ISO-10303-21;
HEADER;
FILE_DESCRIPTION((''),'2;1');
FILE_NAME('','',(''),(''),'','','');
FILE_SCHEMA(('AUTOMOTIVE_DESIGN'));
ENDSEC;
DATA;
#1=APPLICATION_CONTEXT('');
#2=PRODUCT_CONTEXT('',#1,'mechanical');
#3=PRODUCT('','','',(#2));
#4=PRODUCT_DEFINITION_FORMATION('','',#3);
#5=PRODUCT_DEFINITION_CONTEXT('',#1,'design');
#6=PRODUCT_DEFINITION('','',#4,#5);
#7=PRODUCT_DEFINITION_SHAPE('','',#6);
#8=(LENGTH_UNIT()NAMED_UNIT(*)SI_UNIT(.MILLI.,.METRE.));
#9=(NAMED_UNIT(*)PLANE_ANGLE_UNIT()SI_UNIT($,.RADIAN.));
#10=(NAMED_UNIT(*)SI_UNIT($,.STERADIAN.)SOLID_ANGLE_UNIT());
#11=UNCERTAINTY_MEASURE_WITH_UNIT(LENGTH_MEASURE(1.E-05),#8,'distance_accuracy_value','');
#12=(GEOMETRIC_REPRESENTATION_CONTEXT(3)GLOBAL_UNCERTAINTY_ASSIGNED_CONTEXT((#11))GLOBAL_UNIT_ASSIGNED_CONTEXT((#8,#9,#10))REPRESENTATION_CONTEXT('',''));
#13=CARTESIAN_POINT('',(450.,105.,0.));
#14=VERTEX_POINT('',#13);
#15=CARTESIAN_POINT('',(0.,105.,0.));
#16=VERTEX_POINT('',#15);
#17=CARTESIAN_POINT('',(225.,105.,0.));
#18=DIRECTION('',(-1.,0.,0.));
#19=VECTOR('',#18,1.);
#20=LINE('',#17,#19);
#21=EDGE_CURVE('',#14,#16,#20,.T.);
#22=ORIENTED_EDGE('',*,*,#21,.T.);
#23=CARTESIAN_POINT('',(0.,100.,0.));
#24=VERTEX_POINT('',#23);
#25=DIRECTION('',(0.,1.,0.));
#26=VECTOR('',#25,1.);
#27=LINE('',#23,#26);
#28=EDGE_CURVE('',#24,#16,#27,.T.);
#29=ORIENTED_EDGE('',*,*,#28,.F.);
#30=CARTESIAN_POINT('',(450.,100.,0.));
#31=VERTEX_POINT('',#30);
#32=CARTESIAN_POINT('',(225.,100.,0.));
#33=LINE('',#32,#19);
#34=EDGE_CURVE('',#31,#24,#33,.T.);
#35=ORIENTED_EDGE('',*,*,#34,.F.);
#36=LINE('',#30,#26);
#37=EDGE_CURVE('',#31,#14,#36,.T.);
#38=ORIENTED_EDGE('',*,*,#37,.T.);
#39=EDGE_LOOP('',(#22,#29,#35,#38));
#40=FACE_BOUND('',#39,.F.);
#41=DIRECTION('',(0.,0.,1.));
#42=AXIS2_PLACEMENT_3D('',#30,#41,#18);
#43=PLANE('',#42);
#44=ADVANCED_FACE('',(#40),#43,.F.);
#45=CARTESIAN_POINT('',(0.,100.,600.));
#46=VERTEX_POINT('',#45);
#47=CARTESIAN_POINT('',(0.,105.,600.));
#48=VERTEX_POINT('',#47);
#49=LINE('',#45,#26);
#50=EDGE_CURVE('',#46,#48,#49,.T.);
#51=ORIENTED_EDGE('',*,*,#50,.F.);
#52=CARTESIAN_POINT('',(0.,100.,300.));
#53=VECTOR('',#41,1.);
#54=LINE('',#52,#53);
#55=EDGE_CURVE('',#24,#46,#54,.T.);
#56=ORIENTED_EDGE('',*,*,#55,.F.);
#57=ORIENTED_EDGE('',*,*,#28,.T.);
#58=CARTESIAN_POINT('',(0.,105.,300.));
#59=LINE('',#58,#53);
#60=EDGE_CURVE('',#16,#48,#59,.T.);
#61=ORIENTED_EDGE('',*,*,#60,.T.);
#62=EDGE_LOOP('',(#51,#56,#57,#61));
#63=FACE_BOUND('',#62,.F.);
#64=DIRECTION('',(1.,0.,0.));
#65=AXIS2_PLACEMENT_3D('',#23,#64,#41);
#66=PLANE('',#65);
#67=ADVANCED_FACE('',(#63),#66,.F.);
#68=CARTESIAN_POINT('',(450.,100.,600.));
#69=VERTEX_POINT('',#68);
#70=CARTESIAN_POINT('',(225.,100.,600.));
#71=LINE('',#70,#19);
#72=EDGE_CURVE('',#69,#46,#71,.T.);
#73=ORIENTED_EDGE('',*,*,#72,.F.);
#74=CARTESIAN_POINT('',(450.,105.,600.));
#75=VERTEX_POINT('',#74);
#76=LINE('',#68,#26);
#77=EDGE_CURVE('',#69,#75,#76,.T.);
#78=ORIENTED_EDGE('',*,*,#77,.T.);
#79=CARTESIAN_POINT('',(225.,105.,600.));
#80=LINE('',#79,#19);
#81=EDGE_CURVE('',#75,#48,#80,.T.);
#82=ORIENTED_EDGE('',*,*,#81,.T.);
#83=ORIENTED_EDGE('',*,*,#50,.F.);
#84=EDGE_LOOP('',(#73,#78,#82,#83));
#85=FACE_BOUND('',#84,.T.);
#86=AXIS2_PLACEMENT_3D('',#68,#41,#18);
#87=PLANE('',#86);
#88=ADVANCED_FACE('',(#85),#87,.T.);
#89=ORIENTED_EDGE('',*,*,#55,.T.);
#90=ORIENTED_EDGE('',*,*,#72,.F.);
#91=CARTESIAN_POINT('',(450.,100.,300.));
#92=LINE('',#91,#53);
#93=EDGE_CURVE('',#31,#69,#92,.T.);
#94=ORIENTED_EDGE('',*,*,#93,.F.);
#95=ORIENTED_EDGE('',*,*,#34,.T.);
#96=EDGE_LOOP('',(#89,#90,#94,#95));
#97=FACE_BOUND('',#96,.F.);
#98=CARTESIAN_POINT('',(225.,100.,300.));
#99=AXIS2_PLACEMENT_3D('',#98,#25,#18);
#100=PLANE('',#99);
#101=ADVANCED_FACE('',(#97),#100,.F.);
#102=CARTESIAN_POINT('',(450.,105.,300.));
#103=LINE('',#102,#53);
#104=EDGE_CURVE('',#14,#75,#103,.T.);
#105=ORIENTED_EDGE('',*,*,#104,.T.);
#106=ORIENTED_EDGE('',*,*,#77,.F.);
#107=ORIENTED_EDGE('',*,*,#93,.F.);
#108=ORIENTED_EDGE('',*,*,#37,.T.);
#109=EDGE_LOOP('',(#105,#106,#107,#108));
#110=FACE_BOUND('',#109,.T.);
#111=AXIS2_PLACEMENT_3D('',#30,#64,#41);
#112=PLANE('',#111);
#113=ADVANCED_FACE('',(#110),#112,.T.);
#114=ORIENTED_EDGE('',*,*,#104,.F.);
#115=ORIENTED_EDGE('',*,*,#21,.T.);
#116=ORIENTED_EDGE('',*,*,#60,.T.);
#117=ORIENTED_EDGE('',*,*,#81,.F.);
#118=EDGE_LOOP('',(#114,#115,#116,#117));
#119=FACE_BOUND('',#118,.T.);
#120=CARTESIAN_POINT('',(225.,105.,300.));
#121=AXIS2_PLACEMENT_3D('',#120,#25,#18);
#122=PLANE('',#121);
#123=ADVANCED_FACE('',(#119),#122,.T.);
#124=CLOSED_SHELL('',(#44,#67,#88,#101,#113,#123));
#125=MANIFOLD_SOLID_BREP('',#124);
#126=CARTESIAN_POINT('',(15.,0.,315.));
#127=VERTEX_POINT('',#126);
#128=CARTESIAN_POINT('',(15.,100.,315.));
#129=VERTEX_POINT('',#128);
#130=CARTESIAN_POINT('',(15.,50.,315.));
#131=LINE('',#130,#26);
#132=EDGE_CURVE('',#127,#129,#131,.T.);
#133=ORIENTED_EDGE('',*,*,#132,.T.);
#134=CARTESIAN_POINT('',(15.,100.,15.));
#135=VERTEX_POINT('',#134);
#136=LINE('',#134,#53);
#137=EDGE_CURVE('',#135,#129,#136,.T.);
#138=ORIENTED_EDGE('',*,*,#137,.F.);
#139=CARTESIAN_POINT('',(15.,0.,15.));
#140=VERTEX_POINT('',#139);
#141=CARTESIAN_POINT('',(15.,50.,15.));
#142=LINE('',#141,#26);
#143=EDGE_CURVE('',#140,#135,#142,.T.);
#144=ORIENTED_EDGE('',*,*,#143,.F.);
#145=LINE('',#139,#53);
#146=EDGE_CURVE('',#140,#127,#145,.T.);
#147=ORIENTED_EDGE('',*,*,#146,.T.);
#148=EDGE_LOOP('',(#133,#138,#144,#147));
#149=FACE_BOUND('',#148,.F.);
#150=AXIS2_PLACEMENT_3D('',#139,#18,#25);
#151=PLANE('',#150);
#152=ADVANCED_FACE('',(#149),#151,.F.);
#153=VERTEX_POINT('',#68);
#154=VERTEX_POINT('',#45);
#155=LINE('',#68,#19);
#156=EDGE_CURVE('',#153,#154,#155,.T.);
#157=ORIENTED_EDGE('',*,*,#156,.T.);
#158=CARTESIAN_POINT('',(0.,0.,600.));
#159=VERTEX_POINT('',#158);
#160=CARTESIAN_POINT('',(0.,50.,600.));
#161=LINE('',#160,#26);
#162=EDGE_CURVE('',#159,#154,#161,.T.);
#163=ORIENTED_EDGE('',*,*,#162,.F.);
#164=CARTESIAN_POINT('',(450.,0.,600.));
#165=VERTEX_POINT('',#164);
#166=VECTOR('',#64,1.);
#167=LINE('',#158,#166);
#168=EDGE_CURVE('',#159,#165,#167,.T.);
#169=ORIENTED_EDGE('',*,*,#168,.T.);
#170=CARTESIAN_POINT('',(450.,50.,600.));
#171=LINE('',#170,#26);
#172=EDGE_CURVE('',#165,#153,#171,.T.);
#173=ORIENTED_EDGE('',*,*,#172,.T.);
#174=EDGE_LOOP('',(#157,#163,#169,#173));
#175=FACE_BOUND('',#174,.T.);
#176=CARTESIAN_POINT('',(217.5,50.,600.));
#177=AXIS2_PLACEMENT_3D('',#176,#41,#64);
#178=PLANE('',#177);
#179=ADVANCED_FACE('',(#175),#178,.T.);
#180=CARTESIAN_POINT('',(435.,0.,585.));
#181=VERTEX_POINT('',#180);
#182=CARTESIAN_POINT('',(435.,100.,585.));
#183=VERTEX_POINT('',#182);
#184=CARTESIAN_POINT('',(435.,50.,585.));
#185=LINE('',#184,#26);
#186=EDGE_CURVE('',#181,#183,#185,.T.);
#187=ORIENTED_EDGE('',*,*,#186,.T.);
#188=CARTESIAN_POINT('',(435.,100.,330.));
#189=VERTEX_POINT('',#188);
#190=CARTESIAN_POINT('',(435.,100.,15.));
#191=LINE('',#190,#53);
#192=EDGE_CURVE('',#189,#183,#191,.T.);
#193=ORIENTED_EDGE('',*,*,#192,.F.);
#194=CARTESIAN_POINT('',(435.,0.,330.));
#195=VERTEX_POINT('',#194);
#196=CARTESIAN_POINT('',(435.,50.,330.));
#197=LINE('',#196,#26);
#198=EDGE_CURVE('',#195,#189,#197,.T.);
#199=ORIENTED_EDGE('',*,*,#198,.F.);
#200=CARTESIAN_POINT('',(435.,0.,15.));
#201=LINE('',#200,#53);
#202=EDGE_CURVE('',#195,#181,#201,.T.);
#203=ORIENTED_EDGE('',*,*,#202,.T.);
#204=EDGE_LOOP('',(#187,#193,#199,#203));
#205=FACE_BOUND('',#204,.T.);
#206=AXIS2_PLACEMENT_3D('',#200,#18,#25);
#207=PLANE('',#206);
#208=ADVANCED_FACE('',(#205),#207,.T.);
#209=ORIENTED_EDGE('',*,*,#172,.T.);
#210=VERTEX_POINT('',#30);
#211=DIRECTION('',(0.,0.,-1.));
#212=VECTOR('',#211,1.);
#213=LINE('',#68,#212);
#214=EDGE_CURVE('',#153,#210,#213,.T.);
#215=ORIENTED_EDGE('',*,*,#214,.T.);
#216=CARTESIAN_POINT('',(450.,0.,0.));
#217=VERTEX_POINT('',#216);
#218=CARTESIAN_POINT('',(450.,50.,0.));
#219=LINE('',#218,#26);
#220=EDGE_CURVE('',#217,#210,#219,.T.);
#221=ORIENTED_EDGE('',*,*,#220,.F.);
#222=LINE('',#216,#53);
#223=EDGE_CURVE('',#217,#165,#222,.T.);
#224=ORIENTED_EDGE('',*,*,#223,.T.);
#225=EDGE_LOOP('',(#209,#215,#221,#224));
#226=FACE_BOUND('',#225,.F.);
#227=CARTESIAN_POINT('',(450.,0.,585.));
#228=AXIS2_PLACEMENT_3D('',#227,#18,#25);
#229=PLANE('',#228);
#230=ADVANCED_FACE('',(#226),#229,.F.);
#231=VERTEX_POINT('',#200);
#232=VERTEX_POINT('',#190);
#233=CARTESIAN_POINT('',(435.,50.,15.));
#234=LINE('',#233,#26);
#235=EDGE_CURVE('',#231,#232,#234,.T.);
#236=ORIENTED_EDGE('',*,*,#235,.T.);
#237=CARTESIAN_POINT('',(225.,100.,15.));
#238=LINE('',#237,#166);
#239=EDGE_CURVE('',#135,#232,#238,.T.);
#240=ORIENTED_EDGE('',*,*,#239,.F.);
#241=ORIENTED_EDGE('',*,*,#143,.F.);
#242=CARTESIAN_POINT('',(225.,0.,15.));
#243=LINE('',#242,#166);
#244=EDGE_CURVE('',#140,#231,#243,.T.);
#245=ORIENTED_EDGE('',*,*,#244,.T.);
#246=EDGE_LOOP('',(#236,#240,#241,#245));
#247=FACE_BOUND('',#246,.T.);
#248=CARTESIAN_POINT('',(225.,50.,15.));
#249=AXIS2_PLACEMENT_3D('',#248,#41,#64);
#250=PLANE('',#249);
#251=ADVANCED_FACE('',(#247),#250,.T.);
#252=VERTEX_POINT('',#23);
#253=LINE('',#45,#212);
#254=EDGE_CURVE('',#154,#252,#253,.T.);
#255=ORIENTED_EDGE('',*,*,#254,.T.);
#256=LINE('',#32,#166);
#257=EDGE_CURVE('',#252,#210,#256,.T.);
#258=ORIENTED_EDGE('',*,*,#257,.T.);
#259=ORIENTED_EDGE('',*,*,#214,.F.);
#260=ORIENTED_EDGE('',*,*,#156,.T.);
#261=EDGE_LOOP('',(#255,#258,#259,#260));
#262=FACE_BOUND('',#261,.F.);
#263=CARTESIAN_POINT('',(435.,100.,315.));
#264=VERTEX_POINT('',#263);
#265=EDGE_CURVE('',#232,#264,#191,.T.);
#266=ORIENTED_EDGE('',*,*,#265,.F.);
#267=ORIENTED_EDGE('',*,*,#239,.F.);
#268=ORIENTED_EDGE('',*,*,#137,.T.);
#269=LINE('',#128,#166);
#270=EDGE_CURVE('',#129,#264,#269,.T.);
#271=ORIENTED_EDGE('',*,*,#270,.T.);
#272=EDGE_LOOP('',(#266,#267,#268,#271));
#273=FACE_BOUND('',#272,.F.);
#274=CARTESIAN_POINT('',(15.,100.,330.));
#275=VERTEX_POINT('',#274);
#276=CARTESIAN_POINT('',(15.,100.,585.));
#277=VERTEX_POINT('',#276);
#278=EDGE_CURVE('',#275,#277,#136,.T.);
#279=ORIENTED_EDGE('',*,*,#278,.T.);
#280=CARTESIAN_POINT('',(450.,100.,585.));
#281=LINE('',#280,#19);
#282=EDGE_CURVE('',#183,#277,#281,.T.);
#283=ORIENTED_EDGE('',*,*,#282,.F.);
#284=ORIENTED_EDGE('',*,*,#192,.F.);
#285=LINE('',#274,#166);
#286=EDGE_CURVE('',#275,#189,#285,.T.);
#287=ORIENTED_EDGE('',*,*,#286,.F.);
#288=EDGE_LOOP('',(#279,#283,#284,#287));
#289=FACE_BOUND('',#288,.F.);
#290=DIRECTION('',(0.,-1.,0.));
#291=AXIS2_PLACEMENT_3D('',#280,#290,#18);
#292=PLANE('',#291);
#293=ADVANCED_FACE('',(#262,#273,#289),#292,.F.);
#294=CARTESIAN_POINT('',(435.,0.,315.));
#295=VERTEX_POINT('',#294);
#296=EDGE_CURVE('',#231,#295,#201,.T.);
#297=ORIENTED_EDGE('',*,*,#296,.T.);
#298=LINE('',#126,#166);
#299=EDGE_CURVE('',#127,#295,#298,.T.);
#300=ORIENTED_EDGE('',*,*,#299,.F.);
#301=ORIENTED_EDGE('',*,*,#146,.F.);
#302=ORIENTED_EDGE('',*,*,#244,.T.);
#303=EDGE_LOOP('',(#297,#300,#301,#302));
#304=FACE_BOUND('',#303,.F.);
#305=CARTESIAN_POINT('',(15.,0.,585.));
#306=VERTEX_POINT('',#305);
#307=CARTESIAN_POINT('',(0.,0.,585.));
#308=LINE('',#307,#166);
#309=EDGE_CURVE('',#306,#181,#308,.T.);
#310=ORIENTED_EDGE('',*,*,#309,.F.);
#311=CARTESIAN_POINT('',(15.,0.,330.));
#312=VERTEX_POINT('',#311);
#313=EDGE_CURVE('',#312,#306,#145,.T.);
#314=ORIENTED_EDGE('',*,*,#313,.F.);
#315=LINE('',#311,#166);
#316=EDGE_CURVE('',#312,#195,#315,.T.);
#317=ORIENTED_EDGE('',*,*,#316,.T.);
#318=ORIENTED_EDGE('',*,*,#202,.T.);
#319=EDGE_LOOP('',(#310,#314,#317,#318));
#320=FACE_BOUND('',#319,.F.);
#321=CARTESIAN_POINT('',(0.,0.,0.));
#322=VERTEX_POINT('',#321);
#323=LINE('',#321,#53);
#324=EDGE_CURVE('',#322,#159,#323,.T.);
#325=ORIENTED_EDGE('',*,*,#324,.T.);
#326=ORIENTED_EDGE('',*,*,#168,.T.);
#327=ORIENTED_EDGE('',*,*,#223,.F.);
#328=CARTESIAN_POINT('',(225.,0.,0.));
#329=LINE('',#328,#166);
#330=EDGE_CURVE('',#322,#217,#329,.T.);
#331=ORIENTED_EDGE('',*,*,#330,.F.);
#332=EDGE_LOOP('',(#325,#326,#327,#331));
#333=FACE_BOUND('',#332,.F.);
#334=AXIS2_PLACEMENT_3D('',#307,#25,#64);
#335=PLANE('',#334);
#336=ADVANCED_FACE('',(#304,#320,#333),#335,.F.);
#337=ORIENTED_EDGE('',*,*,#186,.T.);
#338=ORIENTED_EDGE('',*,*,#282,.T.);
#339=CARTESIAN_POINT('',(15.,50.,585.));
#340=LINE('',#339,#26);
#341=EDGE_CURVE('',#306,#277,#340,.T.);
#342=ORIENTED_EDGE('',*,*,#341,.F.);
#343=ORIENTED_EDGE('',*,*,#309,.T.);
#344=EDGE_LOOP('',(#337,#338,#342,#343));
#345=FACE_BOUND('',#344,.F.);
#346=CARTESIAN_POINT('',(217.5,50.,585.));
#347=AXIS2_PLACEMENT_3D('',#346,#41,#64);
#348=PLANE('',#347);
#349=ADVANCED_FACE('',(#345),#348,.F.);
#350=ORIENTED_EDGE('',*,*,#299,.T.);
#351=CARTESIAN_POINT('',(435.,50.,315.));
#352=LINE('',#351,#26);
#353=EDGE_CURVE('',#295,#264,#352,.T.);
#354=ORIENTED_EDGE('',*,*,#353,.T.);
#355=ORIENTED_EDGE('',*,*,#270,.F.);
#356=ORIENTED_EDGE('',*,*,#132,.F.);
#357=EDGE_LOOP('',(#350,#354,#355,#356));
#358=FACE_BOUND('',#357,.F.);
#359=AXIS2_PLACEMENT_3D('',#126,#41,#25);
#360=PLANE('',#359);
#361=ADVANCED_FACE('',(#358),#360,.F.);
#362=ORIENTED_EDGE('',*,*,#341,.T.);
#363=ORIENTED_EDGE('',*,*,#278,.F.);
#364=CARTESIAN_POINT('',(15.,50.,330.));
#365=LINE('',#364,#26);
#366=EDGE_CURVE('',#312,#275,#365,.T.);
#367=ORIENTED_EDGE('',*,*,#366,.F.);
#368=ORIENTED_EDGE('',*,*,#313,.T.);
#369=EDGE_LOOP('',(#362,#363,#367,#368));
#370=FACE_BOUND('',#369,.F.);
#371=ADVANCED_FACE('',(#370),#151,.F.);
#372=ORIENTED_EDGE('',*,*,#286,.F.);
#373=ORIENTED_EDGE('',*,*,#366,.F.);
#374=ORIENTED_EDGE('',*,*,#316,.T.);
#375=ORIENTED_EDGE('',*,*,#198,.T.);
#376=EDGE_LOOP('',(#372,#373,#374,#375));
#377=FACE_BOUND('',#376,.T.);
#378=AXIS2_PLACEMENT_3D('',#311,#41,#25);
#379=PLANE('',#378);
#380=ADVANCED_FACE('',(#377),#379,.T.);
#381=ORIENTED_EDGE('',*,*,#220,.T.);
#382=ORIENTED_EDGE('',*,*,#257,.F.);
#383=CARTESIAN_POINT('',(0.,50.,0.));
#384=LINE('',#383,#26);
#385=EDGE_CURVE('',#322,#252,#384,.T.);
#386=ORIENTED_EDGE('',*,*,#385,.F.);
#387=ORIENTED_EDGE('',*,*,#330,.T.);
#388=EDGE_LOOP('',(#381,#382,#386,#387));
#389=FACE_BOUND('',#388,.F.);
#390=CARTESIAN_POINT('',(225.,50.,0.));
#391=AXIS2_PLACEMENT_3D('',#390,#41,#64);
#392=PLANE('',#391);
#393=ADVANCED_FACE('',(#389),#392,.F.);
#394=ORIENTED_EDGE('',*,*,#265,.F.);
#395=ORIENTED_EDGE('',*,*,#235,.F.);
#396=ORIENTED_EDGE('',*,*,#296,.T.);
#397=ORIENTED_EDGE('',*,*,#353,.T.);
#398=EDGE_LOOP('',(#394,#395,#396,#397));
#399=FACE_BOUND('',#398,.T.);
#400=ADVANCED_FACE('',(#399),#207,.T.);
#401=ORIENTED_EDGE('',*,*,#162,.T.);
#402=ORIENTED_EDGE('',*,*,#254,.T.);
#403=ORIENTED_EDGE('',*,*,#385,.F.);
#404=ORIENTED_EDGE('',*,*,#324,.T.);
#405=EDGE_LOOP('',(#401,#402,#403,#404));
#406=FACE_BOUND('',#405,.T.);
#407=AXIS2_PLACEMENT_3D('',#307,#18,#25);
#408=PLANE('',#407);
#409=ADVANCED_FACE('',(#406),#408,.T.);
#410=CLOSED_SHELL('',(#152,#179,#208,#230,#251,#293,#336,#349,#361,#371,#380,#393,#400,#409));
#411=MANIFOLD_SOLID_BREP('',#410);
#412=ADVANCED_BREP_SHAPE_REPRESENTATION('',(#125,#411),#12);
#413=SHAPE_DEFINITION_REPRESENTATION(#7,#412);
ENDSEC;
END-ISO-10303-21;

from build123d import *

# Parameters (mm, degrees)
F0_W     = 450
F0_H     = 100
F1_DEPTH = 15
F2_W     = 15
F2_H     = 100
F3_DEPTH = 570
F4_W     = 435
F4_H     = 100
F4_W_2   = 15
F5_DEPTH = 15
F6_W     = 100
F6_H     = 15
F7_DEPTH = 420
F8_W     = 450
F8_H     = 600
F8_W_2   = 420
F8_H_2   = 300
F8_H_3   = 255
F9_DEPTH = 5


with BuildPart() as f1:
    # F0 (on Top) → F1 (new body)
    with BuildSketch(Plane.XY):
        with Locations((225, 50)):
            Rectangle(F0_W, F0_H)
    extrude(amount=F1_DEPTH)

    # F2 (on face) → F3 (join)
    with BuildSketch(Plane.XY.offset(15)):
        with Locations((7.5, 50)):
            Rectangle(F2_W, F2_H)
        with Locations((442.5, 50)):
            Rectangle(F2_W, F2_H)
    extrude(amount=F3_DEPTH)

    # F4 (on face) → F5 (join)
    with BuildSketch(Plane.XY.offset(585)):
        with Locations((217.5, 50)):
            Rectangle(F4_W, F4_H)
        with Locations((442.5, 50)):
            Rectangle(F4_W_2, F4_H)
    extrude(amount=F5_DEPTH)

    # F6 (on face) → F7 (join, through all)
    with BuildSketch(Plane.YZ.offset(15)):
        with Locations((50, 322.5)):
            Rectangle(F6_W, F6_H)
    extrude(amount=F7_DEPTH)


with BuildPart() as f9:
    # F8 (on face) → F9 (new body)
    with BuildSketch(Plane(origin=(0, 100, 0), x_dir=(-1, 0, 0), z_dir=(0, 1, 0))):
        with Locations((-225, 300)):
            Rectangle(F8_W, F8_H)
        with Locations((-225, 165)):
            Rectangle(F8_W_2, F8_H_2, mode=Mode.SUBTRACT)
        with Locations((-225, 457.5)):
            Rectangle(F8_W_2, F8_H_3, mode=Mode.SUBTRACT)
        with Locations((-225, 457.5)):
            Rectangle(F8_W_2, F8_H_3)
        with Locations((-225, 165)):
            Rectangle(F8_W_2, F8_H_2)
    extrude(amount=F9_DEPTH)


solid = Compound([f1.part, f9.part])
